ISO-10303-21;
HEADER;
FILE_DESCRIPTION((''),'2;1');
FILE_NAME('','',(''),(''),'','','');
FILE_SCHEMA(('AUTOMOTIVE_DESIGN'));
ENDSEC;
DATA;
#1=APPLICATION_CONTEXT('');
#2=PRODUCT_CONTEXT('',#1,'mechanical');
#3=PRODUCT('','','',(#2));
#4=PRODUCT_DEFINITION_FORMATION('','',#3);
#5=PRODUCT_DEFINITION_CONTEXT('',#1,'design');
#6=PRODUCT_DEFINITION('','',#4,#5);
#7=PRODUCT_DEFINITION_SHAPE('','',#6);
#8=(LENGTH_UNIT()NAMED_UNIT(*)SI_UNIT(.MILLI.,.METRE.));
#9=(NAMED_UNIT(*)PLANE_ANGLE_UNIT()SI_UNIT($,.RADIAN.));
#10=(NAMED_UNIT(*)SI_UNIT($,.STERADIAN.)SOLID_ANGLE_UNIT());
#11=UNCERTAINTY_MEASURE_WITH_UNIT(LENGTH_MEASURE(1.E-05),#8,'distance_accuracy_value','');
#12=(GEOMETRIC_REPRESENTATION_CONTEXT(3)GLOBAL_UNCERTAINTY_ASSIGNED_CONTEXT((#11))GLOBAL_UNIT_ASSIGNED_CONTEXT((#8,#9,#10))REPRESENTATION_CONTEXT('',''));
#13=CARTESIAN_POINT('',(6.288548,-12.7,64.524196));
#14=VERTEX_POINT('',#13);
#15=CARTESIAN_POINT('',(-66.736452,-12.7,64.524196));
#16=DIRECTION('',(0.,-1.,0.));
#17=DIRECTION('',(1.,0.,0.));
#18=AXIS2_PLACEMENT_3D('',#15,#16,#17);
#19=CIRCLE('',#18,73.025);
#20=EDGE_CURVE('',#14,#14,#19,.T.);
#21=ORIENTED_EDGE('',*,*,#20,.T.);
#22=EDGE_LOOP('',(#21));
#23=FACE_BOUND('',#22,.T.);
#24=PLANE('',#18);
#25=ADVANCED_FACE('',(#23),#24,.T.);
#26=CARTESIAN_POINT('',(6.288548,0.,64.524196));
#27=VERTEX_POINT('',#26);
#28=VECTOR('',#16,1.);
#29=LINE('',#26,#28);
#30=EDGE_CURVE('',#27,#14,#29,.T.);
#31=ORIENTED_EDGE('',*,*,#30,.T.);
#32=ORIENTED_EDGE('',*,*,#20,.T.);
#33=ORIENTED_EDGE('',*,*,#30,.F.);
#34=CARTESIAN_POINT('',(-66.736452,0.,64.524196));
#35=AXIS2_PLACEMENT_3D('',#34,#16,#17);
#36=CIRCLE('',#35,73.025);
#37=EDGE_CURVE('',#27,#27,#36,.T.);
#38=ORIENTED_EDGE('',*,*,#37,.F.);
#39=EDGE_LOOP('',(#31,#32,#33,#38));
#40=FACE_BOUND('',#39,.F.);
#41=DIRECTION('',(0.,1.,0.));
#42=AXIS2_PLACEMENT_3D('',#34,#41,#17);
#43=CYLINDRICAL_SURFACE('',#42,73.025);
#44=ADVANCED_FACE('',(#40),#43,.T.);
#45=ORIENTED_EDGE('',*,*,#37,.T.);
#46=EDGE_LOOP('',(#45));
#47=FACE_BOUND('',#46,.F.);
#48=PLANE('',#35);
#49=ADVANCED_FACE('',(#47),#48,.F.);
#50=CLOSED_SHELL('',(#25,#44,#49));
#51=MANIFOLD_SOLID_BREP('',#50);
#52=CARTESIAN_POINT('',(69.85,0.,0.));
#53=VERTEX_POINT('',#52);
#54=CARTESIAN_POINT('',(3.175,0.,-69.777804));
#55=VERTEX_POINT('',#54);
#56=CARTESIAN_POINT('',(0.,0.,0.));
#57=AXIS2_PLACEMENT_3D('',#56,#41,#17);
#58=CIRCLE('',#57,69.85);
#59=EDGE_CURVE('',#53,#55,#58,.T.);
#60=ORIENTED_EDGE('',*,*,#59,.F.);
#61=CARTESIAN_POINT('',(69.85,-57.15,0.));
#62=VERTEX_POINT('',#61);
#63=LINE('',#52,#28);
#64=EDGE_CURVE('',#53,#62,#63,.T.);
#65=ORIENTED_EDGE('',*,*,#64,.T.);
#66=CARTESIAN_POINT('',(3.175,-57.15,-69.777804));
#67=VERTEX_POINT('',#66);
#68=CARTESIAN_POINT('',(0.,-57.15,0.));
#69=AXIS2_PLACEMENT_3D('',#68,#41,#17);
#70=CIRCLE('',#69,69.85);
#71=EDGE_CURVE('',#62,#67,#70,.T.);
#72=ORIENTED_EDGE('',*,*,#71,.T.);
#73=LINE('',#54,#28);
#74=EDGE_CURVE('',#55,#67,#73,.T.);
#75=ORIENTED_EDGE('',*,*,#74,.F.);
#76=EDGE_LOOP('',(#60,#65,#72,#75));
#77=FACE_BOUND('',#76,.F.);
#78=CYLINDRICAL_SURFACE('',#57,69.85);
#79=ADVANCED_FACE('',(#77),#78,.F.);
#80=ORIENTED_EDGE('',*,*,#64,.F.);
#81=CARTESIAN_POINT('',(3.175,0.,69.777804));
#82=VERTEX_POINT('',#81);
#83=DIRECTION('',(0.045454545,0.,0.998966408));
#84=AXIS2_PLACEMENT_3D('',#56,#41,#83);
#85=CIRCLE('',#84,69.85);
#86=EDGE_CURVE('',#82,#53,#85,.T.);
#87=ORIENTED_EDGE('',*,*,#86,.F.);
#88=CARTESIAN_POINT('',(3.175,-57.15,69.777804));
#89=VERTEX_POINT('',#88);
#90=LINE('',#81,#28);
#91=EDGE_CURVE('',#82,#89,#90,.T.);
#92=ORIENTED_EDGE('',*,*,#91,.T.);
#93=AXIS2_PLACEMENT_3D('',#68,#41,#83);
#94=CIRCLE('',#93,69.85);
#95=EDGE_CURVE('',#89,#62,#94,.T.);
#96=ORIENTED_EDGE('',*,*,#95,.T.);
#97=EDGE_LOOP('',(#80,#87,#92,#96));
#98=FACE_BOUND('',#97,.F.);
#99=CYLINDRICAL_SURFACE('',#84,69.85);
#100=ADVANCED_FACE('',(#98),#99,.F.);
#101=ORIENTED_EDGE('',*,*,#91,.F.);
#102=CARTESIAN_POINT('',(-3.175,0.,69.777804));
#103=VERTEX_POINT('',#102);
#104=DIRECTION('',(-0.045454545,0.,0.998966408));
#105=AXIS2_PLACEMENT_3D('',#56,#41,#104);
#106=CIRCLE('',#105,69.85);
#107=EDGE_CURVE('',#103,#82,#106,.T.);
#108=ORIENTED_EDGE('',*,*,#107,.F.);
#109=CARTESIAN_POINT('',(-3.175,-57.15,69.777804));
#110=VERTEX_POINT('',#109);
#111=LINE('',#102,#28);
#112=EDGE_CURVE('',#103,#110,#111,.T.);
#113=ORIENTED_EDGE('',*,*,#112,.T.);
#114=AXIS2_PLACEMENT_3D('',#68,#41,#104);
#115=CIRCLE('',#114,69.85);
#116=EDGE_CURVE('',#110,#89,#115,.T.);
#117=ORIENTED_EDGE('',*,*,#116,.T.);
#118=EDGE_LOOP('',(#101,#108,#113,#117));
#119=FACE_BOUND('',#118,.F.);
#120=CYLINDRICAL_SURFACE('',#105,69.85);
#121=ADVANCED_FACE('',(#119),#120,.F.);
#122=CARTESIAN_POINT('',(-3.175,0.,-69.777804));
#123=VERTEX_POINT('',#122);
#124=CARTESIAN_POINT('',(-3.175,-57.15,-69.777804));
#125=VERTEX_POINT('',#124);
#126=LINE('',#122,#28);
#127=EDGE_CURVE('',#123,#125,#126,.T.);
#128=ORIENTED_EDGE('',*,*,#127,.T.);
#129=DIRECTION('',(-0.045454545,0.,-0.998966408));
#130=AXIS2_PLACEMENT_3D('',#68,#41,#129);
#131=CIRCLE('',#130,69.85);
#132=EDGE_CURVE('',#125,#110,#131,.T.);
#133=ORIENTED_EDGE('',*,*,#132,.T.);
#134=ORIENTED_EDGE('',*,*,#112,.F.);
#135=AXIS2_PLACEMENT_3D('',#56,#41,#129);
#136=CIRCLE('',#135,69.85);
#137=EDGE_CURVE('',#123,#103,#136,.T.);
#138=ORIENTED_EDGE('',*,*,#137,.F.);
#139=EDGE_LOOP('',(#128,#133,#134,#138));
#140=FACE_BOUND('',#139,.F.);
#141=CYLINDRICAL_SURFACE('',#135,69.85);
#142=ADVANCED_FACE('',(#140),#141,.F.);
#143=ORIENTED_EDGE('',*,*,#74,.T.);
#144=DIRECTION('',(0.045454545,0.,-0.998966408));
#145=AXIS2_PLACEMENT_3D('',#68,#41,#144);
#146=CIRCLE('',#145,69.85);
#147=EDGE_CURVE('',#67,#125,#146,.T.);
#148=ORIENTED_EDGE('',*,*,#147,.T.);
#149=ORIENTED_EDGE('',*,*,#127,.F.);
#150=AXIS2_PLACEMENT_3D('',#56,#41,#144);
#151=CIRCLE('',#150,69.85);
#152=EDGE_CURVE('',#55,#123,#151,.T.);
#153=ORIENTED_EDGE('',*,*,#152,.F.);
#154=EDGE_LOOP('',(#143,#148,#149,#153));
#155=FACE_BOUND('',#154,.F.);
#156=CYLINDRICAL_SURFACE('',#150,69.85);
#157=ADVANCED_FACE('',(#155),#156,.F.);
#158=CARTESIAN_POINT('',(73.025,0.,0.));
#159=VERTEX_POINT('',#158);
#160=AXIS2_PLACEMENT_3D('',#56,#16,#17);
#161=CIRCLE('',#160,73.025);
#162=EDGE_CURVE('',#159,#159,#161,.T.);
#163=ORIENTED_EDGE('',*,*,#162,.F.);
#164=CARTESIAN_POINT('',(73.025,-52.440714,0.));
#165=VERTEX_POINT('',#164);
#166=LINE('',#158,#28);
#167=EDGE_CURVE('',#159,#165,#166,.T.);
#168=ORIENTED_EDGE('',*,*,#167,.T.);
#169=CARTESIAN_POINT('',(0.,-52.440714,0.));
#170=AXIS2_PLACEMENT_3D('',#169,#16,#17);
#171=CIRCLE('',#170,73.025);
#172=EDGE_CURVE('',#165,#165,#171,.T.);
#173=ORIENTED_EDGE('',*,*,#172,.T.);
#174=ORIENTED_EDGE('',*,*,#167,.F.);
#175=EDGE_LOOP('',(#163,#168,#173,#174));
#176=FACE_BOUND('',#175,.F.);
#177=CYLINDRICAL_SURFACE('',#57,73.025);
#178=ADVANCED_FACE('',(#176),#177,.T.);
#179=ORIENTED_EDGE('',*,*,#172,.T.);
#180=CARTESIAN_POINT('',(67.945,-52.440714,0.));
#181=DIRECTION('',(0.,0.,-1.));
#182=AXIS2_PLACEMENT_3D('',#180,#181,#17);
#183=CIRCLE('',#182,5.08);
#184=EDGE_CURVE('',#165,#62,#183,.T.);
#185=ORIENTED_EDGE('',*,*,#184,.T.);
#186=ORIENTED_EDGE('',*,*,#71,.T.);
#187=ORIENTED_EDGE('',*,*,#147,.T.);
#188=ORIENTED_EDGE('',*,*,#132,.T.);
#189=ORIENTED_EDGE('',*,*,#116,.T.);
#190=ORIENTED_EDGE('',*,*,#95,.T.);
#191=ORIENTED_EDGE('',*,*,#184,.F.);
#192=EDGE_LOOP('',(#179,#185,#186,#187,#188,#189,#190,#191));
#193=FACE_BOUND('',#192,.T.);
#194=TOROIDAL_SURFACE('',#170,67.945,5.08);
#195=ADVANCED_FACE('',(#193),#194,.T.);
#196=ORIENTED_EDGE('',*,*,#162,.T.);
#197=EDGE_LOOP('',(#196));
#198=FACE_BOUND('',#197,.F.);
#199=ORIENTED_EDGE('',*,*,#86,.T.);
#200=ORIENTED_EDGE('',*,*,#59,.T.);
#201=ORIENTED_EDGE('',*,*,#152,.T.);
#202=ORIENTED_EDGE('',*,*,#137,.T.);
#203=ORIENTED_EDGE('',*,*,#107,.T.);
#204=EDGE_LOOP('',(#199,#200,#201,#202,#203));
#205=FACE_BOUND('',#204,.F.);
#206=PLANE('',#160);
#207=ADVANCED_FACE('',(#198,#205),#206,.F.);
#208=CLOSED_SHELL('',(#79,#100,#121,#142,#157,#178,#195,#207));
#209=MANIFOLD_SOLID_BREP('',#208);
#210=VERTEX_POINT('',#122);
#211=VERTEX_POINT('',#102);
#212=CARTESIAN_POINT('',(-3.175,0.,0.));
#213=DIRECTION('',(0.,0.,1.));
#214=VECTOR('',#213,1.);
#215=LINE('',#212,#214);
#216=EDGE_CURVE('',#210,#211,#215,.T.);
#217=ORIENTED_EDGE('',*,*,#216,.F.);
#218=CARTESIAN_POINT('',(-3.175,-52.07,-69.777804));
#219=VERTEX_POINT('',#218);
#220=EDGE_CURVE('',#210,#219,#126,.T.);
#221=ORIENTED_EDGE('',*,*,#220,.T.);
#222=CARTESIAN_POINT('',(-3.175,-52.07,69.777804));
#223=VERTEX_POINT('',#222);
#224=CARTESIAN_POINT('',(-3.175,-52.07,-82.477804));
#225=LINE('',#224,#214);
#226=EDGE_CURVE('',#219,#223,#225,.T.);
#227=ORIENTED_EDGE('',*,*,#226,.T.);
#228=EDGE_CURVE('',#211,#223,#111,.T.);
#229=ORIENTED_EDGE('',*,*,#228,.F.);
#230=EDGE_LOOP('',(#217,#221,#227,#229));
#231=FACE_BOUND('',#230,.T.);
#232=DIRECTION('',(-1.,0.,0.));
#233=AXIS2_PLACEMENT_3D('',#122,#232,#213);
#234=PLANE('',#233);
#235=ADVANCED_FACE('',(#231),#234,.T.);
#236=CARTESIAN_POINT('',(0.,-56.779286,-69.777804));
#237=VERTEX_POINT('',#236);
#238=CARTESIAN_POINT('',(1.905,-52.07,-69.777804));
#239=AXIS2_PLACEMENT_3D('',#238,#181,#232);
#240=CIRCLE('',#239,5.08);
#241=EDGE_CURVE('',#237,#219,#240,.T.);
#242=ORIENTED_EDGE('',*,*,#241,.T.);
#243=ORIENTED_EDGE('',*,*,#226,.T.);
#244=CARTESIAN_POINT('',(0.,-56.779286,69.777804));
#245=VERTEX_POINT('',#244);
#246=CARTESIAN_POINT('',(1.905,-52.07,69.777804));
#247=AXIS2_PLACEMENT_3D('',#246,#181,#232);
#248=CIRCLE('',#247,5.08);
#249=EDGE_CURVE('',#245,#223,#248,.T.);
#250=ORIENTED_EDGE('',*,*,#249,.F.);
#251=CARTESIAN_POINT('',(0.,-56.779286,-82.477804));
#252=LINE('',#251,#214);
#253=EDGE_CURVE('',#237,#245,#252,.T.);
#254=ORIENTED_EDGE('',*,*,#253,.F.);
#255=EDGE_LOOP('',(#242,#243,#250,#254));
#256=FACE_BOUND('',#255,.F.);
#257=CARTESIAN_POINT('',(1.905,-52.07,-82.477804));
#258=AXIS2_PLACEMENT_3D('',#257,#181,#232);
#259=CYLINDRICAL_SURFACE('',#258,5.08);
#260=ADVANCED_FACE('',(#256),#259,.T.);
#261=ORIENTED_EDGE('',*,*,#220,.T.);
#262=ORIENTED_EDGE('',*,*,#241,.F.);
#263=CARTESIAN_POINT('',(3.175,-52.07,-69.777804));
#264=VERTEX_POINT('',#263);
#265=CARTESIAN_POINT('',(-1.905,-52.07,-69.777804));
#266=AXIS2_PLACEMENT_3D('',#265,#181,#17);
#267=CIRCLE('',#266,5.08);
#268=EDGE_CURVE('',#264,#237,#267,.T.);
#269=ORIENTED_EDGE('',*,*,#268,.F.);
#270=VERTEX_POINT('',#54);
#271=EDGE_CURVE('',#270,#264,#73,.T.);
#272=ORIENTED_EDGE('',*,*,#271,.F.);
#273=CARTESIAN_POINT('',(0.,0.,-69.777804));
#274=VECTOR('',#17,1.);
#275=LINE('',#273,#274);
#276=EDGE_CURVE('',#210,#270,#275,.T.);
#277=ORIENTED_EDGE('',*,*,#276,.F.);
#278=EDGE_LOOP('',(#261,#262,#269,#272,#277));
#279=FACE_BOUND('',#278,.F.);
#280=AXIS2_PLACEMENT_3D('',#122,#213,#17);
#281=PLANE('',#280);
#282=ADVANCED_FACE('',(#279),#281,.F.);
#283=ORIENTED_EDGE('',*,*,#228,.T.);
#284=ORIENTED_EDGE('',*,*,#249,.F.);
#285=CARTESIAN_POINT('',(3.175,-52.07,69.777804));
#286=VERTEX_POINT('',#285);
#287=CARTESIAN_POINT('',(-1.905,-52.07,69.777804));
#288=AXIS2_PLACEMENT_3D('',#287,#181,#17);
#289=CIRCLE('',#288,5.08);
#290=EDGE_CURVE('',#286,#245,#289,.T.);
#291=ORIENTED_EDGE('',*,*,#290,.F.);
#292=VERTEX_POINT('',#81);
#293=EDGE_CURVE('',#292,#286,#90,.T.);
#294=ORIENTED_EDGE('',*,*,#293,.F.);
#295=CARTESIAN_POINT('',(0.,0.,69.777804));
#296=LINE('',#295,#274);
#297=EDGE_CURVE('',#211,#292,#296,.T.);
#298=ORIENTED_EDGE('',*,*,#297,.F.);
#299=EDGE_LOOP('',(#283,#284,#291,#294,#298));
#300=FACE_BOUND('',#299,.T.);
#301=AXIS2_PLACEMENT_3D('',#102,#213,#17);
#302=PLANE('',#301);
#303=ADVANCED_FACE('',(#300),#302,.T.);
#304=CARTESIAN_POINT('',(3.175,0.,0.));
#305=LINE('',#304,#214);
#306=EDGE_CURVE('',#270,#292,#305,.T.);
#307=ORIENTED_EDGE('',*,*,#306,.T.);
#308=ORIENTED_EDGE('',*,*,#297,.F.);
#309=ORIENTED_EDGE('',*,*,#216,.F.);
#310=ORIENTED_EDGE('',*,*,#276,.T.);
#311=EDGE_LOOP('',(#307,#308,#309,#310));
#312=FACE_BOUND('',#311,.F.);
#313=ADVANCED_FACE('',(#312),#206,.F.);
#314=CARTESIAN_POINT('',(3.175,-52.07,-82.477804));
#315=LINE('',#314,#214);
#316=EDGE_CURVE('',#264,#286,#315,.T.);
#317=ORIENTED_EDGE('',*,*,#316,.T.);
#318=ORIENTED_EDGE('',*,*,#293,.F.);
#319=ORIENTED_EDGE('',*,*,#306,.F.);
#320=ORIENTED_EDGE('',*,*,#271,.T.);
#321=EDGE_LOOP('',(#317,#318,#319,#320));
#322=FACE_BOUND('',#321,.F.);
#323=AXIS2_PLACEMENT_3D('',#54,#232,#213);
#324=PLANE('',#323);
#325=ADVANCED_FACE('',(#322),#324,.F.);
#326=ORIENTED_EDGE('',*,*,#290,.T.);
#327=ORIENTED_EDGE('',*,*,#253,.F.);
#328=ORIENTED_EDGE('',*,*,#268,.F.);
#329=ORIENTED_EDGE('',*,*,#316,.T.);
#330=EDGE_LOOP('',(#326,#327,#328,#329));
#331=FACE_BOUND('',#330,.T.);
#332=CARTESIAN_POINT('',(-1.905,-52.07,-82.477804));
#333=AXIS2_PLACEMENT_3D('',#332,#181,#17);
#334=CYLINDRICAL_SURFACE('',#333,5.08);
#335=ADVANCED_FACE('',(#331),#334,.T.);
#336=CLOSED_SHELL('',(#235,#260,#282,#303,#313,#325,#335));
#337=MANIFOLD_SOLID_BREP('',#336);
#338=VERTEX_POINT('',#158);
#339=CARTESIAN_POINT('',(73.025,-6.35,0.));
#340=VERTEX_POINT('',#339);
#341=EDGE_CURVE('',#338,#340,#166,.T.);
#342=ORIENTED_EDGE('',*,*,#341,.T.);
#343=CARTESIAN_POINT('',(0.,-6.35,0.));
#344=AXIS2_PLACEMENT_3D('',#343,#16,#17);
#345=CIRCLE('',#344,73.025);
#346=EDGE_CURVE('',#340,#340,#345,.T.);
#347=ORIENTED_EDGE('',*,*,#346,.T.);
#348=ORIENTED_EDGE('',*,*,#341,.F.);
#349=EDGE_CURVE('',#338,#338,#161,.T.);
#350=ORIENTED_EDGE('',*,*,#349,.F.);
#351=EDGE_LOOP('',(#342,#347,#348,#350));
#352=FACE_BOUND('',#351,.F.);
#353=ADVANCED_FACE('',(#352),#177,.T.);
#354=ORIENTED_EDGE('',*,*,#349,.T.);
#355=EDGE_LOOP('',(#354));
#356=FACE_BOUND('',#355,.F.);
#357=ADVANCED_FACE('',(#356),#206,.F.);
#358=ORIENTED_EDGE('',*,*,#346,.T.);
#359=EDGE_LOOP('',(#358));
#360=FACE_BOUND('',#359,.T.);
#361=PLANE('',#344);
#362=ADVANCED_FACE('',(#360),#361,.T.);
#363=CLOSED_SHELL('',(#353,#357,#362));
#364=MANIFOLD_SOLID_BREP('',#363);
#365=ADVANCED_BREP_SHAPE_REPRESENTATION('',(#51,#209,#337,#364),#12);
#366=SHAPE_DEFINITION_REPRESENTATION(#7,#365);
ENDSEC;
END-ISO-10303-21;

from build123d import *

# Parameters (mm, degrees)
F0_R          = 73.025
F1_DEPTH      = 57.15
F0_W          = 6.35
F0_H          = 139.5556071966
F2_R          = 73.025
F3_DEPTH      = 6.35
F4_2_T1_DEPTH = 164.9556071966
F5_R          = 73.025
F6_DEPTH      = 12.7


# Not quite as in the source:
# - a fillet or chamfer that OpenCascade refuses, or shapes differently, is made with other operations: its cross-section is extruded or revolved along the edge and cut away or added


with BuildPart() as f1:
    # F0 (on Front) → F1 (new body)
    with BuildSketch(Plane.XZ):
        Circle(F0_R)
        with BuildLine():
            ThreePointArc((3.175, 69.7778035983), (50.5014665629, 48.2558221876), (69.85, 0))
            ThreePointArc((69.85, 0), (50.5014665629, -48.2558221876), (3.175, -69.7778035983))
            ThreePointArc((3.175, -69.7778035983), (0, -69.85), (-3.175, -69.7778035983))
            ThreePointArc((-3.175, -69.7778035983), (-69.85, 0), (-3.175, 69.7778035983))
            ThreePointArc((-3.175, 69.7778035983), (0, 69.85), (3.175, 69.7778035983))
        make_face(mode=Mode.SUBTRACT)
    extrude(amount=F1_DEPTH)

    # F4: fillet of radius 5.08 on 1 edges, made by hand

    # F4_s1 → F4_t2 (revolve, cut)
    with BuildSketch(Plane.XY):
        with BuildLine():
            ThreePointArc((73.025, -52.4407139607), (72.1571134838, -55.2805202921), (69.85, -57.15))
            Line((69.85, -57.15), (73.025, -57.15))
            Line((73.025, -57.15), (73.025, -52.4407139607))
        make_face()
    revolve(axis=Axis((0, -57.15, 0), (0, -1, 0)), mode=Mode.SUBTRACT)


with BuildPart() as f1b:
    # F0 (on Front) → F1, piece 2 (new body)
    with BuildSketch(Plane.XZ):
        Rectangle(F0_W, F0_H)
    extrude(amount=F1_DEPTH)

    # F4#2: fillet of radius 5.08 on 2 edges, made by hand

    # F4_2_s2 → F4_2_t1 (cut)
    with BuildSketch(Plane.XY.offset(-82.4778035983)):
        with BuildLine():
            ThreePointArc((-3.175, -52.07), (-1.6871024484, -55.6621024484), (1.905, -57.15))
            Line((1.905, -57.15), (-3.175, -57.15))
            Line((-3.175, -57.15), (-3.175, -52.07))
        make_face()
        with BuildLine():
            ThreePointArc((3.175, -52.07), (1.6871024484, -55.6621024484), (-1.905, -57.15))
            Line((-1.905, -57.15), (3.175, -57.15))
            Line((3.175, -57.15), (3.175, -52.07))
        make_face()
    extrude(amount=F4_2_T1_DEPTH, mode=Mode.SUBTRACT)


with BuildPart() as f3:
    # F2 (on Front) → F3 (new body)
    with BuildSketch(Plane.XZ):
        Circle(F2_R)
    extrude(amount=F3_DEPTH)


with BuildPart() as f6:
    # F5 (on Front) → F6 (new body)
    with BuildSketch(Plane.XZ):
        with Locations((-66.7364522815, 64.5241960883)):
            Circle(F5_R)
    extrude(amount=F6_DEPTH)


solid = Compound([f1.part, f1b.part, f3.part, f6.part])
